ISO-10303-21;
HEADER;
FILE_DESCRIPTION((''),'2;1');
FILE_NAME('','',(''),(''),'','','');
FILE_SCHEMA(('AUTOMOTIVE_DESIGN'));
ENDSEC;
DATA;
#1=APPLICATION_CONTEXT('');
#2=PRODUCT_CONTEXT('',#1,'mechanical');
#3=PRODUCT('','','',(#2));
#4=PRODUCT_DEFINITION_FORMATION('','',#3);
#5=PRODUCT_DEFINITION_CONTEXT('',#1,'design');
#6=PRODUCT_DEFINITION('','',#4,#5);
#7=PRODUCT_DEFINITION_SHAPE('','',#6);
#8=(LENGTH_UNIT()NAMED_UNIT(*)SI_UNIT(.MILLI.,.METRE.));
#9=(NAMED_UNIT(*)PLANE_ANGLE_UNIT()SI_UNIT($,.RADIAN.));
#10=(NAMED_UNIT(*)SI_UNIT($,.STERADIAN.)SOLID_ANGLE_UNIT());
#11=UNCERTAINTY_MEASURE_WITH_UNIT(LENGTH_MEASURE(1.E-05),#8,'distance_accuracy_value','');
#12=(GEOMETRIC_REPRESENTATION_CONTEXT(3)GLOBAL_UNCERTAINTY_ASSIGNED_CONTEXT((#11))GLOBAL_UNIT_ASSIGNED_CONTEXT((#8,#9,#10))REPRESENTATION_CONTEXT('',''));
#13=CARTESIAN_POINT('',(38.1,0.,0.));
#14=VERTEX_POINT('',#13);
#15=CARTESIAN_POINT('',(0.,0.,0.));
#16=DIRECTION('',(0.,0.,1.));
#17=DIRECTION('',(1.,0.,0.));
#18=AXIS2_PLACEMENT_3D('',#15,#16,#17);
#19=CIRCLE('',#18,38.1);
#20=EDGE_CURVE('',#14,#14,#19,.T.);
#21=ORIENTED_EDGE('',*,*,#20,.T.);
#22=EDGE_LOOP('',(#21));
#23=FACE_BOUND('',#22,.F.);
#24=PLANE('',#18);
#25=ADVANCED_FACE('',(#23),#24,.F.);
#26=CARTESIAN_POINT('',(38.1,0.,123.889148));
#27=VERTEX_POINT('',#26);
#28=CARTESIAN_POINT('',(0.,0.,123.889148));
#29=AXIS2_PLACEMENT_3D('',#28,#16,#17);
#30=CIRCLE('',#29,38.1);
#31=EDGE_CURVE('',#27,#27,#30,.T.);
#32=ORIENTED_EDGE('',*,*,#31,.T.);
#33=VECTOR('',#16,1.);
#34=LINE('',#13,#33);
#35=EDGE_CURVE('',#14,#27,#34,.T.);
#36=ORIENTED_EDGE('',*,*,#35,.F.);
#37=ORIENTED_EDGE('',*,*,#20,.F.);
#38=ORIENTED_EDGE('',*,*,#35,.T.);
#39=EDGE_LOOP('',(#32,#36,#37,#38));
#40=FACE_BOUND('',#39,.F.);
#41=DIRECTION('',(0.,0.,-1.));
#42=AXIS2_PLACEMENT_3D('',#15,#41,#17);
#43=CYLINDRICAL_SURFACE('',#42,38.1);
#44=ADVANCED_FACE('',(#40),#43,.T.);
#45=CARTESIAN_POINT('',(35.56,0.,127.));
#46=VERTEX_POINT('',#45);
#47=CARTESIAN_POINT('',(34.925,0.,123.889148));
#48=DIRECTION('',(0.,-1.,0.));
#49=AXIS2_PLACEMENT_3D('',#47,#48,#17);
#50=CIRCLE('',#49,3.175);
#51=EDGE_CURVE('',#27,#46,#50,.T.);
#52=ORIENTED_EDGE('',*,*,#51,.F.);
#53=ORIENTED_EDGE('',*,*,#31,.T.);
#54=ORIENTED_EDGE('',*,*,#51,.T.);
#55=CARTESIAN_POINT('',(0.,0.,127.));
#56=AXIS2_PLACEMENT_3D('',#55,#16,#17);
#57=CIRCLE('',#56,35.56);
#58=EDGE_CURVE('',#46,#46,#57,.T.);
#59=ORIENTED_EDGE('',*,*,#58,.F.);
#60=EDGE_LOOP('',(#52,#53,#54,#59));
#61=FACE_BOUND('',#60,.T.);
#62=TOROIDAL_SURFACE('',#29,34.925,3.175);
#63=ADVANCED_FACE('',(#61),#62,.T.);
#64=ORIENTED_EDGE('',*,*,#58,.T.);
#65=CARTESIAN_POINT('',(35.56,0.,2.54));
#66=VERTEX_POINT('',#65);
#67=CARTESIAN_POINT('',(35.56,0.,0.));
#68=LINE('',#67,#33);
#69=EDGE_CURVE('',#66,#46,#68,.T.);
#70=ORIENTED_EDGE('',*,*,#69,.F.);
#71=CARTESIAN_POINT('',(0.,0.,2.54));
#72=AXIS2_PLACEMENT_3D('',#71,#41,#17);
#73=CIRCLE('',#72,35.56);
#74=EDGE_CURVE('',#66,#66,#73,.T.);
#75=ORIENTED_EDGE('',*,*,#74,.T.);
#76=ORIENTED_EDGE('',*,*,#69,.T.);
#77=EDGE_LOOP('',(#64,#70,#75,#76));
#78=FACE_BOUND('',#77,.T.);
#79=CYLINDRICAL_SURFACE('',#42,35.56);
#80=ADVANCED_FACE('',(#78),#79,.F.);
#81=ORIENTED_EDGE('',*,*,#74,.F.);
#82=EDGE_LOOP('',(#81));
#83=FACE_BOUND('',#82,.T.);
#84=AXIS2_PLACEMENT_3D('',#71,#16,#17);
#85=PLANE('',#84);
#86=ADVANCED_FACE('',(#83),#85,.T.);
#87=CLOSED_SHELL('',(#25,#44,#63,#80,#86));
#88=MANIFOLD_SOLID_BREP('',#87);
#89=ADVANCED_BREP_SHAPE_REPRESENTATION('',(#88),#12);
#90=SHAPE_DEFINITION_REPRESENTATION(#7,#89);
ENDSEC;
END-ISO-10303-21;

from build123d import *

# Parameters (mm, degrees)
F0_R     = 38.1
F1_DEPTH = 127
F2_T     = -2.54


# Not quite as in the source:
# - a fillet or chamfer that OpenCascade refuses, or shapes differently, is made with other operations: its cross-section is extruded or revolved along the edge and cut away or added


with BuildPart() as f1:
    # F0 (on Top) → F1 (new body)
    with BuildSketch(Plane.XY):
        Circle(F0_R)
    extrude(amount=F1_DEPTH)

    # F2
    f2_openings = [f1.faces().sort_by_distance(p)[0] for p in [
        (0, 0, 127),
    ]]
    offset(amount=F2_T, openings=f2_openings)

    # F3: fillet of radius 3.175 on 1 edges, made by hand

    # F3_s1 → F3_t2 (revolve, cut)
    with BuildSketch(Plane.XZ):
        with BuildLine():
            ThreePointArc((38.1, 123.8891480267), (37.3843444248, 125.8971943409), (35.56, 127))
            Line((35.56, 127), (38.1, 127))
            Line((38.1, 127), (38.1, 123.8891480267))
        make_face()
    revolve(axis=Axis((0, 0, 127), (0, 0, 1)), mode=Mode.SUBTRACT)


solid = f1.part
